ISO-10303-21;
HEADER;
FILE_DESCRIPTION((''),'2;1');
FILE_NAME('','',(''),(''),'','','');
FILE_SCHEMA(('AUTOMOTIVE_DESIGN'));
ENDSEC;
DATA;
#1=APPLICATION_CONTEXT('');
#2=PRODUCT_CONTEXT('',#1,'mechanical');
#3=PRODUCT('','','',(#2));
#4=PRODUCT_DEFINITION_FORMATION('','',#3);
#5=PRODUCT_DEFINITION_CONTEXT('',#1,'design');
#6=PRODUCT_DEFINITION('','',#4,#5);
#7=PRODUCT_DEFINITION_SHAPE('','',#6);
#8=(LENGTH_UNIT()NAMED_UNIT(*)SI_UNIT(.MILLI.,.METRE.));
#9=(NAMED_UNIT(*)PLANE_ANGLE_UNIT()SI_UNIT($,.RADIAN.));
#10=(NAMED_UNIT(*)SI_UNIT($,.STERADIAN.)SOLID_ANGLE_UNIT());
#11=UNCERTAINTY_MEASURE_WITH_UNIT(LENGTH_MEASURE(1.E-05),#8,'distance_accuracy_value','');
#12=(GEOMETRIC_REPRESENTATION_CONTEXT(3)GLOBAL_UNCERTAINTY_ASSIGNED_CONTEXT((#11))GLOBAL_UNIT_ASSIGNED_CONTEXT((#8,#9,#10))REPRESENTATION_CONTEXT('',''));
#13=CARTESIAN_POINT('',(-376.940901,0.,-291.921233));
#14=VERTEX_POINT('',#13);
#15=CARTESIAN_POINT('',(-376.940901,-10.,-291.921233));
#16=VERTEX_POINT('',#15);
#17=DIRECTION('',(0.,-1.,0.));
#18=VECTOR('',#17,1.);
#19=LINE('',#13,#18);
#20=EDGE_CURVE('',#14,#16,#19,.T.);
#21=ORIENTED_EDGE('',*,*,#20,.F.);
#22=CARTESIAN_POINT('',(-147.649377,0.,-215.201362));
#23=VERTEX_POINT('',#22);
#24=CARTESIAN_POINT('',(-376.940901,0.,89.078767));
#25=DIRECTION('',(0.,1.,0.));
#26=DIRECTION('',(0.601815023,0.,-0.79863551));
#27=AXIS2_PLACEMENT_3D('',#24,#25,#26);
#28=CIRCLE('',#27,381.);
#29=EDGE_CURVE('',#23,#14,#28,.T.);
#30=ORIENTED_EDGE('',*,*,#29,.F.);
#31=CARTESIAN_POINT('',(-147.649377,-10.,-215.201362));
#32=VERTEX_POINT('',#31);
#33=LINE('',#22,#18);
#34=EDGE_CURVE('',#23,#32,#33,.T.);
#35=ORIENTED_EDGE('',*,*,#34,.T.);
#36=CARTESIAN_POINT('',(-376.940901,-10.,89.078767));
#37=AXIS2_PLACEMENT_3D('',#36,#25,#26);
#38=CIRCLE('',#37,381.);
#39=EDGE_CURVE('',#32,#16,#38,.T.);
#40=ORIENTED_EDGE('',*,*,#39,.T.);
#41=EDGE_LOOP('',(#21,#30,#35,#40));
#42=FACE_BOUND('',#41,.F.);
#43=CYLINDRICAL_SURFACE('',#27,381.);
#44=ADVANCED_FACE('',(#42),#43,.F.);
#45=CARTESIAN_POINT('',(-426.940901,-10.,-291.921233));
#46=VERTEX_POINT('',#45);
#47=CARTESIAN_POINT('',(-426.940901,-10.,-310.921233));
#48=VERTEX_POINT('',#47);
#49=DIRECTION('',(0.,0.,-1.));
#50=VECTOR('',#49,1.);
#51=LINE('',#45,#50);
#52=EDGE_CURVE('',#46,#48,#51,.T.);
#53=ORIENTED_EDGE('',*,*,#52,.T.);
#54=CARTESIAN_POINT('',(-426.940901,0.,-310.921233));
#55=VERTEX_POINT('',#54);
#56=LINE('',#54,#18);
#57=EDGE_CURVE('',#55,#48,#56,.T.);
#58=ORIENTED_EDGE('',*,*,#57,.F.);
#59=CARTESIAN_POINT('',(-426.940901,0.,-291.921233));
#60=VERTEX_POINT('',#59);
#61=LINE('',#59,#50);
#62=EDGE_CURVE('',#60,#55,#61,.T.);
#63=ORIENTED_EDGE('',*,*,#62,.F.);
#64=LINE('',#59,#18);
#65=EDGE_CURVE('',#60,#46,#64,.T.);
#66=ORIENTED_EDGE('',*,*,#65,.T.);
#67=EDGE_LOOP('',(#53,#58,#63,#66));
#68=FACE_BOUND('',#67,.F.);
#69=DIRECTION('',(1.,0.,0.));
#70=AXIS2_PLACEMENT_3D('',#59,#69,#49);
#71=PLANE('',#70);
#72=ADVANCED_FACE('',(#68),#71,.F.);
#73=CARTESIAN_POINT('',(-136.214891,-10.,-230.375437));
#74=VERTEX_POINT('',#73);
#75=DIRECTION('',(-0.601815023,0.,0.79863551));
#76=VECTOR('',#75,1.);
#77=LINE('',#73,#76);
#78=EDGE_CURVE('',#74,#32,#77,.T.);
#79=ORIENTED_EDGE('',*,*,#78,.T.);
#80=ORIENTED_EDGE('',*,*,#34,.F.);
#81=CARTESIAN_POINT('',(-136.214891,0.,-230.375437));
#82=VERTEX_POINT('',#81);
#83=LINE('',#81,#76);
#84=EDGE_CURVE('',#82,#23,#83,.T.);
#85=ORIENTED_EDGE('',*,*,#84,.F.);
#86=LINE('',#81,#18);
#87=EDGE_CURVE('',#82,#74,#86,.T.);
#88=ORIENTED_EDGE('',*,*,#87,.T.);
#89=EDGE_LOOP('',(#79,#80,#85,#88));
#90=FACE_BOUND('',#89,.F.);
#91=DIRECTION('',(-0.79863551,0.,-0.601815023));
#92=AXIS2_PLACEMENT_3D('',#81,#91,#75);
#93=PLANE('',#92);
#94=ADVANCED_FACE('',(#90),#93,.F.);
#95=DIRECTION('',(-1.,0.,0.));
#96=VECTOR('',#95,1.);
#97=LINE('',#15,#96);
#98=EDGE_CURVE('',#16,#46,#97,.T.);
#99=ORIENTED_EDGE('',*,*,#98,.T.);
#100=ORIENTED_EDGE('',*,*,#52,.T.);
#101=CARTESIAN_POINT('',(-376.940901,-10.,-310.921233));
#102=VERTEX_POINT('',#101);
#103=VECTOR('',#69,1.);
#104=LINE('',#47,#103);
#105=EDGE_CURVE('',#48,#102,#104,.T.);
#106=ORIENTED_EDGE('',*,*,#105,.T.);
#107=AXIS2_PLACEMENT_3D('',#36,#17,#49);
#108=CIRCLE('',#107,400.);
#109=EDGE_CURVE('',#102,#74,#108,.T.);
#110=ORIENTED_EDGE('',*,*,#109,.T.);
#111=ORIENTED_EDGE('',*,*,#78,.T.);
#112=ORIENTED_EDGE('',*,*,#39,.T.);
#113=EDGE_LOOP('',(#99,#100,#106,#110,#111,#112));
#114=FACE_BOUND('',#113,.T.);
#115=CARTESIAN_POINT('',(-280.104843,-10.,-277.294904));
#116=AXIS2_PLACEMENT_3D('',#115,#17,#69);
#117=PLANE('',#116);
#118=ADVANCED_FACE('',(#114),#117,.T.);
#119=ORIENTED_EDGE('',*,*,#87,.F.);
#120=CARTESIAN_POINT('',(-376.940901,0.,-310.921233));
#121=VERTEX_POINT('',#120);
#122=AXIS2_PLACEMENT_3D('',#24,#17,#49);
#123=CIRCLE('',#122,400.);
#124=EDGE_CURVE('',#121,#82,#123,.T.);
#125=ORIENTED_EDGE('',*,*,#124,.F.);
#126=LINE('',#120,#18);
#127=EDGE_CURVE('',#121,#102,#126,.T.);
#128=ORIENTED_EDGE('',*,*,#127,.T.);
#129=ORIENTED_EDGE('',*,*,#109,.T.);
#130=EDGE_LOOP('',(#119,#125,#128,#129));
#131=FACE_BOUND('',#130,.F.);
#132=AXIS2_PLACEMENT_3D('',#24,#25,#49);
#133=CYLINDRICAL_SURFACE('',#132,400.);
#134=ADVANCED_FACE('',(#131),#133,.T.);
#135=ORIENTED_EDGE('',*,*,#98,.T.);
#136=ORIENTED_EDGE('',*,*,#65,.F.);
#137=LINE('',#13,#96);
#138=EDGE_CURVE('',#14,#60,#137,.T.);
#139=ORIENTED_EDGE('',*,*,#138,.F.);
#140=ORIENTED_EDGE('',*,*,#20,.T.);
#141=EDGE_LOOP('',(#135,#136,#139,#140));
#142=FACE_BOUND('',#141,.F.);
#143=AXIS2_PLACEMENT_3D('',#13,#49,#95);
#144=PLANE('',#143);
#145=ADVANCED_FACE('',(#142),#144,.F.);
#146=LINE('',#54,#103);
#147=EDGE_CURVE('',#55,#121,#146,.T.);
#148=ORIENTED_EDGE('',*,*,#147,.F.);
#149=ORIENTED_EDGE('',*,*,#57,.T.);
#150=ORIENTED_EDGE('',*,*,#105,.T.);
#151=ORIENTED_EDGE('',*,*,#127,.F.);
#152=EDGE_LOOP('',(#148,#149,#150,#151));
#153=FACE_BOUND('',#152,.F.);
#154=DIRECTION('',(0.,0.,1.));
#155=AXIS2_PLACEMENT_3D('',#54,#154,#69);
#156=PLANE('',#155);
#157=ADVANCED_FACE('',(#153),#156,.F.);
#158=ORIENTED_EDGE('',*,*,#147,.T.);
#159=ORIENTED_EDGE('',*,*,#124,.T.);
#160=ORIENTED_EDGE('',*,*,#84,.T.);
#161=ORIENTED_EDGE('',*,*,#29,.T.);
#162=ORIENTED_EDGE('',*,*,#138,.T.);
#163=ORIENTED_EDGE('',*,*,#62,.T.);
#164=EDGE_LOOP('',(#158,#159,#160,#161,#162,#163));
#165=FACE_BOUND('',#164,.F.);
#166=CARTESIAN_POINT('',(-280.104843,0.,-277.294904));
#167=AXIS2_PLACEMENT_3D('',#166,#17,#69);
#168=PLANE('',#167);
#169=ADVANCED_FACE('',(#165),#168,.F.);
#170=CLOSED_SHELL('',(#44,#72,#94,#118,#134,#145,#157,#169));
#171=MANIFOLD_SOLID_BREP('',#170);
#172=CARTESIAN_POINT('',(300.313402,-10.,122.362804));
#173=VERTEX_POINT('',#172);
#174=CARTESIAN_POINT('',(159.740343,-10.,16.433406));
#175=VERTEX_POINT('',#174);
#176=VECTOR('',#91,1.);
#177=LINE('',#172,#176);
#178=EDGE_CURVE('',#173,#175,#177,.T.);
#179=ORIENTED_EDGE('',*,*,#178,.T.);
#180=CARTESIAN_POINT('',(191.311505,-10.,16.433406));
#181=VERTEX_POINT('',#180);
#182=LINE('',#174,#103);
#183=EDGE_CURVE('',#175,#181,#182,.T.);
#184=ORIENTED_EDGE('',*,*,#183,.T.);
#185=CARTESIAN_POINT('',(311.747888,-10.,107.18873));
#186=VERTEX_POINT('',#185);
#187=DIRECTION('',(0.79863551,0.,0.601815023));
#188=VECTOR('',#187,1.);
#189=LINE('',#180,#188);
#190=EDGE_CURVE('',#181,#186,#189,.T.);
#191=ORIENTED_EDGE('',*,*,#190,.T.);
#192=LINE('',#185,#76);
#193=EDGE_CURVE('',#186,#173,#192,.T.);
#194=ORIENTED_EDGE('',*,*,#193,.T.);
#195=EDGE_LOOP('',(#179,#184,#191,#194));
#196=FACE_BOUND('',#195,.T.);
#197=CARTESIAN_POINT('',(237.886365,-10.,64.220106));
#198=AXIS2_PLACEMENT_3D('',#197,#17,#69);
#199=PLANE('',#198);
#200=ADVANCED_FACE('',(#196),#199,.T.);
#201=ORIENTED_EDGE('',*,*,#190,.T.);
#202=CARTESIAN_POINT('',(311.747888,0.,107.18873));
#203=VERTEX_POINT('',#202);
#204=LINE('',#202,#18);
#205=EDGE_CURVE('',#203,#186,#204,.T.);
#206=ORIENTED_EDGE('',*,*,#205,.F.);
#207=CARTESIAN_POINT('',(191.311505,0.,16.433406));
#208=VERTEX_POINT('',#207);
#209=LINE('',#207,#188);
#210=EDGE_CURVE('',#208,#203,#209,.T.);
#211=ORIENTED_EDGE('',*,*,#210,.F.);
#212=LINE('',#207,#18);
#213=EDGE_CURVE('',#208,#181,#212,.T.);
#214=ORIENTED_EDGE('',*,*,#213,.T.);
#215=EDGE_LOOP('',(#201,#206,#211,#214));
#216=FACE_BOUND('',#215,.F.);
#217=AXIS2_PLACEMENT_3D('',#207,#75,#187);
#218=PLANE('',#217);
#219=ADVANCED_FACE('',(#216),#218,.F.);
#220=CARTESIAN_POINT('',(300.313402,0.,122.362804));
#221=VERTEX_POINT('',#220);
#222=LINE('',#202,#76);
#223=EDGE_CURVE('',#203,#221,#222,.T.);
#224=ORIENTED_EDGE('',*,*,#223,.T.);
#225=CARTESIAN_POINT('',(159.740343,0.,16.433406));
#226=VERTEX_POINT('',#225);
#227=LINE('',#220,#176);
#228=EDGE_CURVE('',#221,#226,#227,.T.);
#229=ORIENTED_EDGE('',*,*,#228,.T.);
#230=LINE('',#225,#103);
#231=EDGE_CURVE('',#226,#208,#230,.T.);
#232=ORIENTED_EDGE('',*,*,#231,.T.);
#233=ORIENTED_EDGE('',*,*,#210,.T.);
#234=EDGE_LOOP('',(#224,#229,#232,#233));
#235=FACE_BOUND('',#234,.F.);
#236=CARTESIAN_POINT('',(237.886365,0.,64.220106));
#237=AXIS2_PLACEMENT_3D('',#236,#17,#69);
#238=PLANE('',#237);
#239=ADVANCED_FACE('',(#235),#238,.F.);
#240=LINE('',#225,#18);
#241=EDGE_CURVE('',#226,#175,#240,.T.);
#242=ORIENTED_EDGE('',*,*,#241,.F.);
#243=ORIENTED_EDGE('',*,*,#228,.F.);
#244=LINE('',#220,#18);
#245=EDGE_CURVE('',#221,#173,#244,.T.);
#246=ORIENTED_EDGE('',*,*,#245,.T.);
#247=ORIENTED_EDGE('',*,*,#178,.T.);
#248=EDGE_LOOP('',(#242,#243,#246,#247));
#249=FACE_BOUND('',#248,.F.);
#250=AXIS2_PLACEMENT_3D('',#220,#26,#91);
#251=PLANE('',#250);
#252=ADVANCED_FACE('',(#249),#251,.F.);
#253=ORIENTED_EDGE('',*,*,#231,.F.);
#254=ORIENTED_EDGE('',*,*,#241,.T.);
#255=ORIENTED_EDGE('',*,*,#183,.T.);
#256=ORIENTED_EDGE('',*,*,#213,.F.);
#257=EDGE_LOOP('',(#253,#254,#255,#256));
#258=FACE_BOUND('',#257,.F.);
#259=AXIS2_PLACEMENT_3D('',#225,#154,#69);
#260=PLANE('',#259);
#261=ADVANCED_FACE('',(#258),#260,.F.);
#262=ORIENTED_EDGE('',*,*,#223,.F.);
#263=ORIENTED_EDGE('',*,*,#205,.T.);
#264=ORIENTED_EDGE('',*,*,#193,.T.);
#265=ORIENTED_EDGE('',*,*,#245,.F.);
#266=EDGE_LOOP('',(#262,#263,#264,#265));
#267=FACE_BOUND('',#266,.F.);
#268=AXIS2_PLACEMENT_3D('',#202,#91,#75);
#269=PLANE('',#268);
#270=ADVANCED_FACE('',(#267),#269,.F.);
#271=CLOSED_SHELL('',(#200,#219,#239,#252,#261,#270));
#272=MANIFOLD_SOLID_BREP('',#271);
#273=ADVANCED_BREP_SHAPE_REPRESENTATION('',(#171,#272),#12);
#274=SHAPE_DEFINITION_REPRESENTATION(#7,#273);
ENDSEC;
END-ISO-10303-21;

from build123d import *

# Parameters (mm, degrees)
F1_DEPTH = 10


# Not quite as in the source:
# - a feature names something its author has since deleted; it is built from what else it names


with BuildPart() as f1:
    # F0 (on Front) → F1 (new body)
    with BuildSketch(Plane.XZ):
        with BuildLine():
            Line((-136.214891398, -230.3754368354), (-147.6493768378, -215.2013621445))
            ThreePointArc((-147.6493768378, -215.2013621445), (-256.0478265684, -272.23254545), (-376.9409006588, -291.9212328165))
            Line((-376.9409006588, -291.9212328165), (-426.9409006588, -291.9212328165))
            Line((-426.9409006588, -291.9212328165), (-426.9409006588, -310.9212328165))
            Line((-426.9409006588, -310.9212328165), (-376.9409006588, -310.9212328165))
            ThreePointArc((-376.9409006588, -310.9212328165), (-250.0190380967, -290.250694899), (-136.214891398, -230.3754368354))
        make_face()
    extrude(amount=F1_DEPTH)


with BuildPart() as f1b:
    # F0 (on Front) → F1, piece 2 (new body)
    with BuildSketch(Plane.XZ):
        Polygon((311.7478876598, 107.1887296189), (300.3134022199, 122.3628043098), (159.7403426108, 16.433405906), (191.3115052921, 16.433405906), align=None)
    extrude(amount=F1_DEPTH)


solid = Compound([f1.part, f1b.part])
